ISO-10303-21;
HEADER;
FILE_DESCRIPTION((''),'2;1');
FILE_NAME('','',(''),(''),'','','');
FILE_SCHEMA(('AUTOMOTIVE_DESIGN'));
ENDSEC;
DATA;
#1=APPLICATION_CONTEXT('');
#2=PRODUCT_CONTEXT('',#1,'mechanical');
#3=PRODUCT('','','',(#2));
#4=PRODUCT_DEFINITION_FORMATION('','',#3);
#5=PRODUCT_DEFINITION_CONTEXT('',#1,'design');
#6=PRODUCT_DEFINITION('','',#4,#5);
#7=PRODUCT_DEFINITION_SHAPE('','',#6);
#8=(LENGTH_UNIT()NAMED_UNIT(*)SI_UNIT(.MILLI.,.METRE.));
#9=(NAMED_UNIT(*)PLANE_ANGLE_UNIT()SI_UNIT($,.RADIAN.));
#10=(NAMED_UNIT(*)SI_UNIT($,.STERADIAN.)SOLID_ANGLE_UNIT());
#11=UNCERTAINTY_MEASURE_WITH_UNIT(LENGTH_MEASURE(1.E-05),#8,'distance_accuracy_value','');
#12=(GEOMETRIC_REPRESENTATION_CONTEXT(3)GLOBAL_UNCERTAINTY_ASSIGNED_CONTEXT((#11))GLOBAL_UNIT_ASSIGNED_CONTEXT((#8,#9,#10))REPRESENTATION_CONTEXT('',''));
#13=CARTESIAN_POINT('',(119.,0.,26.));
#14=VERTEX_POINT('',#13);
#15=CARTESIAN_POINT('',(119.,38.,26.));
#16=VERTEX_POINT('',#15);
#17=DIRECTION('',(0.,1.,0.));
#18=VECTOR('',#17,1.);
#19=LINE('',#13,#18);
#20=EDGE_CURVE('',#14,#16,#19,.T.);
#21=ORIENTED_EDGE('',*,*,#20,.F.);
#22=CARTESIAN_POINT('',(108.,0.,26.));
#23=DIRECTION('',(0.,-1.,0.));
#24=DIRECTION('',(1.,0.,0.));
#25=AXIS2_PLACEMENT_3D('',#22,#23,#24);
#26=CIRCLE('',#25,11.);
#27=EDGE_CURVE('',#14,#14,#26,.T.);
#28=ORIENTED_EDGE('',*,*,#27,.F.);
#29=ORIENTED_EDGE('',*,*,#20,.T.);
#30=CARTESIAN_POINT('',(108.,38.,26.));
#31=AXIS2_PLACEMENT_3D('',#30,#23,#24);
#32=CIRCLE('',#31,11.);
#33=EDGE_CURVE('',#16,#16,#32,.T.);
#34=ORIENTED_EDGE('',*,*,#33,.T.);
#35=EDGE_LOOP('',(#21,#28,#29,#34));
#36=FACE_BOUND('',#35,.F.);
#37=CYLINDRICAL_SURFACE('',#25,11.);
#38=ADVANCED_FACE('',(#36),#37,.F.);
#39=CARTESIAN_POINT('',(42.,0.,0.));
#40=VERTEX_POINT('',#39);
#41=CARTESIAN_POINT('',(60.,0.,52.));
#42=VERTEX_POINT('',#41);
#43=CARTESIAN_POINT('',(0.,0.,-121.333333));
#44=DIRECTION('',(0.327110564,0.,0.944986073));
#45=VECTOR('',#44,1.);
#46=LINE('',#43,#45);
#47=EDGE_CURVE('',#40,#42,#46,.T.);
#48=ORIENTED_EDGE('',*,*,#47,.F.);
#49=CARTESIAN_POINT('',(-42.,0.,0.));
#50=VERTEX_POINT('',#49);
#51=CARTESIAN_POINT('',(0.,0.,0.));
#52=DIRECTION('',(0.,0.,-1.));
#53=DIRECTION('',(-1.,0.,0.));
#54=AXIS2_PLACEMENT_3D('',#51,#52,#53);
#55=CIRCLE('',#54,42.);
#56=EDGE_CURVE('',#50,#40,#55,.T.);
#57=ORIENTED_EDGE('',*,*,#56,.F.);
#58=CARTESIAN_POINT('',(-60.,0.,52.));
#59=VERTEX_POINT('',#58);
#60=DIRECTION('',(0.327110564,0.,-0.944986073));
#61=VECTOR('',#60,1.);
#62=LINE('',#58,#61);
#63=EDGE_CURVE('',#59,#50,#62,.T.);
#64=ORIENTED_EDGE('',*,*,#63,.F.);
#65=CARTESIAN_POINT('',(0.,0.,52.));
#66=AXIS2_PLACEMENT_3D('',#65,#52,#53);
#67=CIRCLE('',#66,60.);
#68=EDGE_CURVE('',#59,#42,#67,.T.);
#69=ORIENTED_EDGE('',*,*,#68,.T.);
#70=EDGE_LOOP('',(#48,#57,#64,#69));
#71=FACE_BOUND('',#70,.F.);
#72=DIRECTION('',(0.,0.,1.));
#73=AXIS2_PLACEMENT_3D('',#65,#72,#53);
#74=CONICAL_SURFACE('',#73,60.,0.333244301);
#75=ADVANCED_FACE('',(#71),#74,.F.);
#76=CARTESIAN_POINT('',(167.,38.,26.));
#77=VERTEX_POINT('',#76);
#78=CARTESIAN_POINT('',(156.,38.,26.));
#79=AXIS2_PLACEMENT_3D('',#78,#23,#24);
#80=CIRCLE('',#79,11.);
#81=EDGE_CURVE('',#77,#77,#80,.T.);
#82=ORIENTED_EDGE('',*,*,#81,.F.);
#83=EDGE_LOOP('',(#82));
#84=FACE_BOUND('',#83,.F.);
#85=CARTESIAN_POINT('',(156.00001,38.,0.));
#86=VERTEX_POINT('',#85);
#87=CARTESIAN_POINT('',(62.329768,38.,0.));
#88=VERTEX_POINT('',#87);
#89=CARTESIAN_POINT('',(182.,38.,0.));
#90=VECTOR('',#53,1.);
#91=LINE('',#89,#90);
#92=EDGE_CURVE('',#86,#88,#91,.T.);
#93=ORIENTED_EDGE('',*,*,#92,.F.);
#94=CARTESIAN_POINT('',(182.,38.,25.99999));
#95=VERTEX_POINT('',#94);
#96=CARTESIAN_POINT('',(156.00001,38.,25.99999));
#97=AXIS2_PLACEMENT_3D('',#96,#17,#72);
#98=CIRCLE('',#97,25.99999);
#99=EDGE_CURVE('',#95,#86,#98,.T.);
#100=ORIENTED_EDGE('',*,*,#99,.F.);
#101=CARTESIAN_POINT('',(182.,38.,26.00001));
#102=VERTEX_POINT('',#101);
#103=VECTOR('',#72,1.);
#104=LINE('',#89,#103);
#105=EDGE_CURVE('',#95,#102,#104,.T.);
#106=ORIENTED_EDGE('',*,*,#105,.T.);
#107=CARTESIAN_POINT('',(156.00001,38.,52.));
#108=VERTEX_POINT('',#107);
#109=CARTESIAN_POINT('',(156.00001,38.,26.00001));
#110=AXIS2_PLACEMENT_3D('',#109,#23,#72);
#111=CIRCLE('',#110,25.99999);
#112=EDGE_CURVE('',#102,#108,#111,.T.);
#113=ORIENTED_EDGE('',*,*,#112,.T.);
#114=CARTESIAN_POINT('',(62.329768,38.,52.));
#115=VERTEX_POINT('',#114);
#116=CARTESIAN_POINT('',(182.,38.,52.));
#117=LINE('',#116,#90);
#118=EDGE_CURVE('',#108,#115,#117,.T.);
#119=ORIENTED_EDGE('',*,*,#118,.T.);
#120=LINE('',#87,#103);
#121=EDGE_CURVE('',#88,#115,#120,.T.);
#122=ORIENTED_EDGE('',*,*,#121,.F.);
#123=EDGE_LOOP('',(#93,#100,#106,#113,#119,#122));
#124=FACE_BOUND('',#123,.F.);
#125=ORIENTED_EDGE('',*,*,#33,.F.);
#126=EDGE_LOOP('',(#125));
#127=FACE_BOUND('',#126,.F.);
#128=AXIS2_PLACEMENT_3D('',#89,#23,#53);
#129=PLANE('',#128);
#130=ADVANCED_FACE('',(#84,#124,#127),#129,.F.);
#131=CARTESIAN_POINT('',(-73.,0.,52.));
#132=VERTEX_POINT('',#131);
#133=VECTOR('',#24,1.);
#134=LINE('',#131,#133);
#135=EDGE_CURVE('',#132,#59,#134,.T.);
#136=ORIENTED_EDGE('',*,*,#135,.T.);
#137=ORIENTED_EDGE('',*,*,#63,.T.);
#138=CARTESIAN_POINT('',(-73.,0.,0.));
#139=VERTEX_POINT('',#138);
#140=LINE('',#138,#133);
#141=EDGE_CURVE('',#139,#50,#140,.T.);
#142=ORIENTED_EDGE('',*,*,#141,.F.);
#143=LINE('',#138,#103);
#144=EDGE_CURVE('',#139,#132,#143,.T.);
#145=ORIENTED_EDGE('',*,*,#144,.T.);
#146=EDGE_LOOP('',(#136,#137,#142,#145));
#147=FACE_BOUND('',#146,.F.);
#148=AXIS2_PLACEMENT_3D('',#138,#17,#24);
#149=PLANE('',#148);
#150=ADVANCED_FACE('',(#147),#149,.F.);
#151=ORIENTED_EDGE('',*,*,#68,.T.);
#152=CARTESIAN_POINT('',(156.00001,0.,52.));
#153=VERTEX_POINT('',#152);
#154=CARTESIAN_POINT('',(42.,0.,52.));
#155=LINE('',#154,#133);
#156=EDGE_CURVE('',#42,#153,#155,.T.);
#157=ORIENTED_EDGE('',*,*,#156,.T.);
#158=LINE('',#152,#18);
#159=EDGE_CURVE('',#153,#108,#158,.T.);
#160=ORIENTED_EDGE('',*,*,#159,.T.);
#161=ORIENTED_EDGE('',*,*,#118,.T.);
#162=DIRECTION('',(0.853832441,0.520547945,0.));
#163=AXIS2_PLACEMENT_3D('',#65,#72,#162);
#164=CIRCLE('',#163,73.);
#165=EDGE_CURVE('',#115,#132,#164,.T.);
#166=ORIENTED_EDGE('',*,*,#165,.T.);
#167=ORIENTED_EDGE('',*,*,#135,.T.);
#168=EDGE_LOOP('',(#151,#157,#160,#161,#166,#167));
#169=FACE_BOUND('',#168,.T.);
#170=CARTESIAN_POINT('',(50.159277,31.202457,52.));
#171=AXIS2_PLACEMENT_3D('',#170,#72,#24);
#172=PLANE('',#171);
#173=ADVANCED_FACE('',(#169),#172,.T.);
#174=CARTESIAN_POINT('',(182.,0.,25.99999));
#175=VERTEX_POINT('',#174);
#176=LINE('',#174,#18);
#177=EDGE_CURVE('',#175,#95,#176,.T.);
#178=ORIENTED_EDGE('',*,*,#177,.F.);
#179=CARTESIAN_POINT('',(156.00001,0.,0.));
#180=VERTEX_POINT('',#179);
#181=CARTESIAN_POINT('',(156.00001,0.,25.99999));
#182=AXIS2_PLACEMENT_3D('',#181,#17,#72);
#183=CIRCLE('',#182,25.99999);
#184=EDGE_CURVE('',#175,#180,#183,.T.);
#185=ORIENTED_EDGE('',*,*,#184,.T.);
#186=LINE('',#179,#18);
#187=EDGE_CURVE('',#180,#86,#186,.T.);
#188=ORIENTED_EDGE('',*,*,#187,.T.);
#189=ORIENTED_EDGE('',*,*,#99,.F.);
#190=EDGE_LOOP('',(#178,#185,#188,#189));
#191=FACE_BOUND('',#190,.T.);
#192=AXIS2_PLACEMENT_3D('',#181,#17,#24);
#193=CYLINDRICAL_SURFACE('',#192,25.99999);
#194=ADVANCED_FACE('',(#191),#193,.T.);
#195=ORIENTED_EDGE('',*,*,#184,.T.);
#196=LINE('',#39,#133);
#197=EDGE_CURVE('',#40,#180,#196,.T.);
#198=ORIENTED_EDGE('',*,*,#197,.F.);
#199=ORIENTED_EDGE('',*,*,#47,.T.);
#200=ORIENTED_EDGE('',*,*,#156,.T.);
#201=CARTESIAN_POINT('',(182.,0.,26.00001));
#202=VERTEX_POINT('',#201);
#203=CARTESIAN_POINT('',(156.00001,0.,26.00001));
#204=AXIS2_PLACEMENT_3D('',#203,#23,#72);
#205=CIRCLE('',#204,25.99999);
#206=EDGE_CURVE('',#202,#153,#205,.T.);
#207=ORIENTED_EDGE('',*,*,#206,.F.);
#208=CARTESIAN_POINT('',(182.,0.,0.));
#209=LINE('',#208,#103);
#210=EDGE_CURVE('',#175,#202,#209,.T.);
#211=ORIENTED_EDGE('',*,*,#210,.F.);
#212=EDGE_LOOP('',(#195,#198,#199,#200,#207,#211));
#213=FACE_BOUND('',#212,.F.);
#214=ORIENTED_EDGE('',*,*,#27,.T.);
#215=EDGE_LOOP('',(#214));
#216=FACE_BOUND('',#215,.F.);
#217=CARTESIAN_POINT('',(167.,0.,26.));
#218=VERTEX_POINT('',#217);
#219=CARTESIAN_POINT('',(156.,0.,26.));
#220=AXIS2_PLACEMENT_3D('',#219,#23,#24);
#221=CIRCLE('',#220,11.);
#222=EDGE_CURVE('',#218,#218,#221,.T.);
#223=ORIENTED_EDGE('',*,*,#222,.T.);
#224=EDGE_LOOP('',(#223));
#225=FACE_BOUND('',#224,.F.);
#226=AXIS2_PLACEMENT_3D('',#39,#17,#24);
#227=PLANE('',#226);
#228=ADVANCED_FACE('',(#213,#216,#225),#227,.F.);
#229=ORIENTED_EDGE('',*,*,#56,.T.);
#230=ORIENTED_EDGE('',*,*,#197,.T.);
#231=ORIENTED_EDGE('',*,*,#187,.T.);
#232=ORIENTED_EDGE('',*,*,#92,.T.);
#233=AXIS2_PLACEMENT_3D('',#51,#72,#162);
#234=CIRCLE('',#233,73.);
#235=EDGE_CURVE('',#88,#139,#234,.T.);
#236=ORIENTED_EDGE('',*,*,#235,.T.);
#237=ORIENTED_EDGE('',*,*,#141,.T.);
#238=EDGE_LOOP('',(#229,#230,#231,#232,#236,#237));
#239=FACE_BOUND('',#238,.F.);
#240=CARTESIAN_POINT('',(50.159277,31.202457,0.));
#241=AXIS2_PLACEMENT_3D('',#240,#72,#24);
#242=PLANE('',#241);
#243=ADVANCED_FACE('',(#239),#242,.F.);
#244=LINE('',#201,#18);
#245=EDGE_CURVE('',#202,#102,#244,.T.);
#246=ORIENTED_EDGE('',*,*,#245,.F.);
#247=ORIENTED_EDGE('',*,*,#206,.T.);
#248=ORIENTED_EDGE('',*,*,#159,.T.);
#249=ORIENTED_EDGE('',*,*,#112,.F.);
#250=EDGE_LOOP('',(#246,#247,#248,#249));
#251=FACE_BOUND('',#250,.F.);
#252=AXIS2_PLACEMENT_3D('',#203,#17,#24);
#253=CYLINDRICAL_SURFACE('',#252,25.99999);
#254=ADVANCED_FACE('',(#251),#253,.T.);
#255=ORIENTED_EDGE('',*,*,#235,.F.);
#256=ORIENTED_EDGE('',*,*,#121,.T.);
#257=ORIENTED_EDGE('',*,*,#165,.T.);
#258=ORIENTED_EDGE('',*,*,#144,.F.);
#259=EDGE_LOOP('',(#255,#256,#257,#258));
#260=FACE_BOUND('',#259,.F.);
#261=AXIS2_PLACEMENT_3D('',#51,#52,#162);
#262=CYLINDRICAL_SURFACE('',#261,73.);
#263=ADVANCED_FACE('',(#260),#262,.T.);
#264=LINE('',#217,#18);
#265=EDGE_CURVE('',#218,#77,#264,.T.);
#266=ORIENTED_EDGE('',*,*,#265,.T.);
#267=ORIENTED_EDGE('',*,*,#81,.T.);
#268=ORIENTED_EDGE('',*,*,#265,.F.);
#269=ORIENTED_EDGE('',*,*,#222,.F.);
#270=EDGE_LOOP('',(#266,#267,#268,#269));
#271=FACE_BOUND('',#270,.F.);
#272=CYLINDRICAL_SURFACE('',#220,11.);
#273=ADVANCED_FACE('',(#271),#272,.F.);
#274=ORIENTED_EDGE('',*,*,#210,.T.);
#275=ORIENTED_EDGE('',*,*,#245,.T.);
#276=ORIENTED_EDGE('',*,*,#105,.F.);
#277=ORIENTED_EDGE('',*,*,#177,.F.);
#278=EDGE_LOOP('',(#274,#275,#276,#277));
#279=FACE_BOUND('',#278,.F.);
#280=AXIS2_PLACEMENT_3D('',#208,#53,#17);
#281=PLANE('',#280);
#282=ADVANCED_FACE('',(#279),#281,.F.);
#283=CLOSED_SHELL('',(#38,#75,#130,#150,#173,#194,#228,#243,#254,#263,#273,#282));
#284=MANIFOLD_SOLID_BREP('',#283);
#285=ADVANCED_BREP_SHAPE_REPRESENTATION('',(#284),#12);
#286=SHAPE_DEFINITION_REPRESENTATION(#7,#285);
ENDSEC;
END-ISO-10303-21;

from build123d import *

# Parameters (mm, degrees)
F1_DEPTH = 52
F4_R     = 11
F5_DEPTH = 73.001
F6_R     = 25.99999


# Not quite as in the source:
# - a fillet or chamfer is up to 0.001 mm smaller than in the source, because OpenCascade refuses the exact size


with BuildPart() as f1:
    # F0 (on Top) → F1 (new body)
    with BuildSketch(Plane.XY):
        with BuildLine():
            Line((182, 38), (62.329768169, 38))
            ThreePointArc((62.329768169, 38), (-19.7348286497, 70.2818364741), (-73, 0))
            Line((-73, 0), (-60, 0))
            ThreePointArc((-60, 0), (0, 60), (60, 0))
            Line((60, 0), (182, 0))
            Line((182, 0), (182, 38))
        make_face()
        with BuildLine():
            ThreePointArc((60, 0), (0, 60), (-60, 0))
            Line((-60, 0), (-42, 0))
            ThreePointArc((-42, 0), (0, 42), (42, 0))
            Line((42, 0), (60, 0))
        make_face()
    extrude(amount=F1_DEPTH)

    # F2 (on face) → F3 (revolve, cut)
    with BuildSketch(Plane.XZ):
        Polygon((-60, 52), (-42, 0), (-42, 52), align=None)
    revolve(axis=Axis((0, 0, 26.0027386248), (0, 0, -1)), mode=Mode.SUBTRACT)

    # F4 (on face) → F5 (cut, through all)
    with BuildSketch(Plane.XZ):
        with Locations((108, 26)):
            Circle(F4_R)
        with Locations((156, 26)):
            Circle(F4_R)
    extrude(amount=-F5_DEPTH, mode=Mode.SUBTRACT)

    # F6 (radius 26 in the source; OpenCascade refuses exactly that, so slightly less here)
    f6_edges = [f1.edges().sort_by_distance(p)[0] for p in [
        (182, 19, 52),
        (182, 19, 0),
    ]]
    fillet(f6_edges, radius=F6_R)


solid = f1.part
